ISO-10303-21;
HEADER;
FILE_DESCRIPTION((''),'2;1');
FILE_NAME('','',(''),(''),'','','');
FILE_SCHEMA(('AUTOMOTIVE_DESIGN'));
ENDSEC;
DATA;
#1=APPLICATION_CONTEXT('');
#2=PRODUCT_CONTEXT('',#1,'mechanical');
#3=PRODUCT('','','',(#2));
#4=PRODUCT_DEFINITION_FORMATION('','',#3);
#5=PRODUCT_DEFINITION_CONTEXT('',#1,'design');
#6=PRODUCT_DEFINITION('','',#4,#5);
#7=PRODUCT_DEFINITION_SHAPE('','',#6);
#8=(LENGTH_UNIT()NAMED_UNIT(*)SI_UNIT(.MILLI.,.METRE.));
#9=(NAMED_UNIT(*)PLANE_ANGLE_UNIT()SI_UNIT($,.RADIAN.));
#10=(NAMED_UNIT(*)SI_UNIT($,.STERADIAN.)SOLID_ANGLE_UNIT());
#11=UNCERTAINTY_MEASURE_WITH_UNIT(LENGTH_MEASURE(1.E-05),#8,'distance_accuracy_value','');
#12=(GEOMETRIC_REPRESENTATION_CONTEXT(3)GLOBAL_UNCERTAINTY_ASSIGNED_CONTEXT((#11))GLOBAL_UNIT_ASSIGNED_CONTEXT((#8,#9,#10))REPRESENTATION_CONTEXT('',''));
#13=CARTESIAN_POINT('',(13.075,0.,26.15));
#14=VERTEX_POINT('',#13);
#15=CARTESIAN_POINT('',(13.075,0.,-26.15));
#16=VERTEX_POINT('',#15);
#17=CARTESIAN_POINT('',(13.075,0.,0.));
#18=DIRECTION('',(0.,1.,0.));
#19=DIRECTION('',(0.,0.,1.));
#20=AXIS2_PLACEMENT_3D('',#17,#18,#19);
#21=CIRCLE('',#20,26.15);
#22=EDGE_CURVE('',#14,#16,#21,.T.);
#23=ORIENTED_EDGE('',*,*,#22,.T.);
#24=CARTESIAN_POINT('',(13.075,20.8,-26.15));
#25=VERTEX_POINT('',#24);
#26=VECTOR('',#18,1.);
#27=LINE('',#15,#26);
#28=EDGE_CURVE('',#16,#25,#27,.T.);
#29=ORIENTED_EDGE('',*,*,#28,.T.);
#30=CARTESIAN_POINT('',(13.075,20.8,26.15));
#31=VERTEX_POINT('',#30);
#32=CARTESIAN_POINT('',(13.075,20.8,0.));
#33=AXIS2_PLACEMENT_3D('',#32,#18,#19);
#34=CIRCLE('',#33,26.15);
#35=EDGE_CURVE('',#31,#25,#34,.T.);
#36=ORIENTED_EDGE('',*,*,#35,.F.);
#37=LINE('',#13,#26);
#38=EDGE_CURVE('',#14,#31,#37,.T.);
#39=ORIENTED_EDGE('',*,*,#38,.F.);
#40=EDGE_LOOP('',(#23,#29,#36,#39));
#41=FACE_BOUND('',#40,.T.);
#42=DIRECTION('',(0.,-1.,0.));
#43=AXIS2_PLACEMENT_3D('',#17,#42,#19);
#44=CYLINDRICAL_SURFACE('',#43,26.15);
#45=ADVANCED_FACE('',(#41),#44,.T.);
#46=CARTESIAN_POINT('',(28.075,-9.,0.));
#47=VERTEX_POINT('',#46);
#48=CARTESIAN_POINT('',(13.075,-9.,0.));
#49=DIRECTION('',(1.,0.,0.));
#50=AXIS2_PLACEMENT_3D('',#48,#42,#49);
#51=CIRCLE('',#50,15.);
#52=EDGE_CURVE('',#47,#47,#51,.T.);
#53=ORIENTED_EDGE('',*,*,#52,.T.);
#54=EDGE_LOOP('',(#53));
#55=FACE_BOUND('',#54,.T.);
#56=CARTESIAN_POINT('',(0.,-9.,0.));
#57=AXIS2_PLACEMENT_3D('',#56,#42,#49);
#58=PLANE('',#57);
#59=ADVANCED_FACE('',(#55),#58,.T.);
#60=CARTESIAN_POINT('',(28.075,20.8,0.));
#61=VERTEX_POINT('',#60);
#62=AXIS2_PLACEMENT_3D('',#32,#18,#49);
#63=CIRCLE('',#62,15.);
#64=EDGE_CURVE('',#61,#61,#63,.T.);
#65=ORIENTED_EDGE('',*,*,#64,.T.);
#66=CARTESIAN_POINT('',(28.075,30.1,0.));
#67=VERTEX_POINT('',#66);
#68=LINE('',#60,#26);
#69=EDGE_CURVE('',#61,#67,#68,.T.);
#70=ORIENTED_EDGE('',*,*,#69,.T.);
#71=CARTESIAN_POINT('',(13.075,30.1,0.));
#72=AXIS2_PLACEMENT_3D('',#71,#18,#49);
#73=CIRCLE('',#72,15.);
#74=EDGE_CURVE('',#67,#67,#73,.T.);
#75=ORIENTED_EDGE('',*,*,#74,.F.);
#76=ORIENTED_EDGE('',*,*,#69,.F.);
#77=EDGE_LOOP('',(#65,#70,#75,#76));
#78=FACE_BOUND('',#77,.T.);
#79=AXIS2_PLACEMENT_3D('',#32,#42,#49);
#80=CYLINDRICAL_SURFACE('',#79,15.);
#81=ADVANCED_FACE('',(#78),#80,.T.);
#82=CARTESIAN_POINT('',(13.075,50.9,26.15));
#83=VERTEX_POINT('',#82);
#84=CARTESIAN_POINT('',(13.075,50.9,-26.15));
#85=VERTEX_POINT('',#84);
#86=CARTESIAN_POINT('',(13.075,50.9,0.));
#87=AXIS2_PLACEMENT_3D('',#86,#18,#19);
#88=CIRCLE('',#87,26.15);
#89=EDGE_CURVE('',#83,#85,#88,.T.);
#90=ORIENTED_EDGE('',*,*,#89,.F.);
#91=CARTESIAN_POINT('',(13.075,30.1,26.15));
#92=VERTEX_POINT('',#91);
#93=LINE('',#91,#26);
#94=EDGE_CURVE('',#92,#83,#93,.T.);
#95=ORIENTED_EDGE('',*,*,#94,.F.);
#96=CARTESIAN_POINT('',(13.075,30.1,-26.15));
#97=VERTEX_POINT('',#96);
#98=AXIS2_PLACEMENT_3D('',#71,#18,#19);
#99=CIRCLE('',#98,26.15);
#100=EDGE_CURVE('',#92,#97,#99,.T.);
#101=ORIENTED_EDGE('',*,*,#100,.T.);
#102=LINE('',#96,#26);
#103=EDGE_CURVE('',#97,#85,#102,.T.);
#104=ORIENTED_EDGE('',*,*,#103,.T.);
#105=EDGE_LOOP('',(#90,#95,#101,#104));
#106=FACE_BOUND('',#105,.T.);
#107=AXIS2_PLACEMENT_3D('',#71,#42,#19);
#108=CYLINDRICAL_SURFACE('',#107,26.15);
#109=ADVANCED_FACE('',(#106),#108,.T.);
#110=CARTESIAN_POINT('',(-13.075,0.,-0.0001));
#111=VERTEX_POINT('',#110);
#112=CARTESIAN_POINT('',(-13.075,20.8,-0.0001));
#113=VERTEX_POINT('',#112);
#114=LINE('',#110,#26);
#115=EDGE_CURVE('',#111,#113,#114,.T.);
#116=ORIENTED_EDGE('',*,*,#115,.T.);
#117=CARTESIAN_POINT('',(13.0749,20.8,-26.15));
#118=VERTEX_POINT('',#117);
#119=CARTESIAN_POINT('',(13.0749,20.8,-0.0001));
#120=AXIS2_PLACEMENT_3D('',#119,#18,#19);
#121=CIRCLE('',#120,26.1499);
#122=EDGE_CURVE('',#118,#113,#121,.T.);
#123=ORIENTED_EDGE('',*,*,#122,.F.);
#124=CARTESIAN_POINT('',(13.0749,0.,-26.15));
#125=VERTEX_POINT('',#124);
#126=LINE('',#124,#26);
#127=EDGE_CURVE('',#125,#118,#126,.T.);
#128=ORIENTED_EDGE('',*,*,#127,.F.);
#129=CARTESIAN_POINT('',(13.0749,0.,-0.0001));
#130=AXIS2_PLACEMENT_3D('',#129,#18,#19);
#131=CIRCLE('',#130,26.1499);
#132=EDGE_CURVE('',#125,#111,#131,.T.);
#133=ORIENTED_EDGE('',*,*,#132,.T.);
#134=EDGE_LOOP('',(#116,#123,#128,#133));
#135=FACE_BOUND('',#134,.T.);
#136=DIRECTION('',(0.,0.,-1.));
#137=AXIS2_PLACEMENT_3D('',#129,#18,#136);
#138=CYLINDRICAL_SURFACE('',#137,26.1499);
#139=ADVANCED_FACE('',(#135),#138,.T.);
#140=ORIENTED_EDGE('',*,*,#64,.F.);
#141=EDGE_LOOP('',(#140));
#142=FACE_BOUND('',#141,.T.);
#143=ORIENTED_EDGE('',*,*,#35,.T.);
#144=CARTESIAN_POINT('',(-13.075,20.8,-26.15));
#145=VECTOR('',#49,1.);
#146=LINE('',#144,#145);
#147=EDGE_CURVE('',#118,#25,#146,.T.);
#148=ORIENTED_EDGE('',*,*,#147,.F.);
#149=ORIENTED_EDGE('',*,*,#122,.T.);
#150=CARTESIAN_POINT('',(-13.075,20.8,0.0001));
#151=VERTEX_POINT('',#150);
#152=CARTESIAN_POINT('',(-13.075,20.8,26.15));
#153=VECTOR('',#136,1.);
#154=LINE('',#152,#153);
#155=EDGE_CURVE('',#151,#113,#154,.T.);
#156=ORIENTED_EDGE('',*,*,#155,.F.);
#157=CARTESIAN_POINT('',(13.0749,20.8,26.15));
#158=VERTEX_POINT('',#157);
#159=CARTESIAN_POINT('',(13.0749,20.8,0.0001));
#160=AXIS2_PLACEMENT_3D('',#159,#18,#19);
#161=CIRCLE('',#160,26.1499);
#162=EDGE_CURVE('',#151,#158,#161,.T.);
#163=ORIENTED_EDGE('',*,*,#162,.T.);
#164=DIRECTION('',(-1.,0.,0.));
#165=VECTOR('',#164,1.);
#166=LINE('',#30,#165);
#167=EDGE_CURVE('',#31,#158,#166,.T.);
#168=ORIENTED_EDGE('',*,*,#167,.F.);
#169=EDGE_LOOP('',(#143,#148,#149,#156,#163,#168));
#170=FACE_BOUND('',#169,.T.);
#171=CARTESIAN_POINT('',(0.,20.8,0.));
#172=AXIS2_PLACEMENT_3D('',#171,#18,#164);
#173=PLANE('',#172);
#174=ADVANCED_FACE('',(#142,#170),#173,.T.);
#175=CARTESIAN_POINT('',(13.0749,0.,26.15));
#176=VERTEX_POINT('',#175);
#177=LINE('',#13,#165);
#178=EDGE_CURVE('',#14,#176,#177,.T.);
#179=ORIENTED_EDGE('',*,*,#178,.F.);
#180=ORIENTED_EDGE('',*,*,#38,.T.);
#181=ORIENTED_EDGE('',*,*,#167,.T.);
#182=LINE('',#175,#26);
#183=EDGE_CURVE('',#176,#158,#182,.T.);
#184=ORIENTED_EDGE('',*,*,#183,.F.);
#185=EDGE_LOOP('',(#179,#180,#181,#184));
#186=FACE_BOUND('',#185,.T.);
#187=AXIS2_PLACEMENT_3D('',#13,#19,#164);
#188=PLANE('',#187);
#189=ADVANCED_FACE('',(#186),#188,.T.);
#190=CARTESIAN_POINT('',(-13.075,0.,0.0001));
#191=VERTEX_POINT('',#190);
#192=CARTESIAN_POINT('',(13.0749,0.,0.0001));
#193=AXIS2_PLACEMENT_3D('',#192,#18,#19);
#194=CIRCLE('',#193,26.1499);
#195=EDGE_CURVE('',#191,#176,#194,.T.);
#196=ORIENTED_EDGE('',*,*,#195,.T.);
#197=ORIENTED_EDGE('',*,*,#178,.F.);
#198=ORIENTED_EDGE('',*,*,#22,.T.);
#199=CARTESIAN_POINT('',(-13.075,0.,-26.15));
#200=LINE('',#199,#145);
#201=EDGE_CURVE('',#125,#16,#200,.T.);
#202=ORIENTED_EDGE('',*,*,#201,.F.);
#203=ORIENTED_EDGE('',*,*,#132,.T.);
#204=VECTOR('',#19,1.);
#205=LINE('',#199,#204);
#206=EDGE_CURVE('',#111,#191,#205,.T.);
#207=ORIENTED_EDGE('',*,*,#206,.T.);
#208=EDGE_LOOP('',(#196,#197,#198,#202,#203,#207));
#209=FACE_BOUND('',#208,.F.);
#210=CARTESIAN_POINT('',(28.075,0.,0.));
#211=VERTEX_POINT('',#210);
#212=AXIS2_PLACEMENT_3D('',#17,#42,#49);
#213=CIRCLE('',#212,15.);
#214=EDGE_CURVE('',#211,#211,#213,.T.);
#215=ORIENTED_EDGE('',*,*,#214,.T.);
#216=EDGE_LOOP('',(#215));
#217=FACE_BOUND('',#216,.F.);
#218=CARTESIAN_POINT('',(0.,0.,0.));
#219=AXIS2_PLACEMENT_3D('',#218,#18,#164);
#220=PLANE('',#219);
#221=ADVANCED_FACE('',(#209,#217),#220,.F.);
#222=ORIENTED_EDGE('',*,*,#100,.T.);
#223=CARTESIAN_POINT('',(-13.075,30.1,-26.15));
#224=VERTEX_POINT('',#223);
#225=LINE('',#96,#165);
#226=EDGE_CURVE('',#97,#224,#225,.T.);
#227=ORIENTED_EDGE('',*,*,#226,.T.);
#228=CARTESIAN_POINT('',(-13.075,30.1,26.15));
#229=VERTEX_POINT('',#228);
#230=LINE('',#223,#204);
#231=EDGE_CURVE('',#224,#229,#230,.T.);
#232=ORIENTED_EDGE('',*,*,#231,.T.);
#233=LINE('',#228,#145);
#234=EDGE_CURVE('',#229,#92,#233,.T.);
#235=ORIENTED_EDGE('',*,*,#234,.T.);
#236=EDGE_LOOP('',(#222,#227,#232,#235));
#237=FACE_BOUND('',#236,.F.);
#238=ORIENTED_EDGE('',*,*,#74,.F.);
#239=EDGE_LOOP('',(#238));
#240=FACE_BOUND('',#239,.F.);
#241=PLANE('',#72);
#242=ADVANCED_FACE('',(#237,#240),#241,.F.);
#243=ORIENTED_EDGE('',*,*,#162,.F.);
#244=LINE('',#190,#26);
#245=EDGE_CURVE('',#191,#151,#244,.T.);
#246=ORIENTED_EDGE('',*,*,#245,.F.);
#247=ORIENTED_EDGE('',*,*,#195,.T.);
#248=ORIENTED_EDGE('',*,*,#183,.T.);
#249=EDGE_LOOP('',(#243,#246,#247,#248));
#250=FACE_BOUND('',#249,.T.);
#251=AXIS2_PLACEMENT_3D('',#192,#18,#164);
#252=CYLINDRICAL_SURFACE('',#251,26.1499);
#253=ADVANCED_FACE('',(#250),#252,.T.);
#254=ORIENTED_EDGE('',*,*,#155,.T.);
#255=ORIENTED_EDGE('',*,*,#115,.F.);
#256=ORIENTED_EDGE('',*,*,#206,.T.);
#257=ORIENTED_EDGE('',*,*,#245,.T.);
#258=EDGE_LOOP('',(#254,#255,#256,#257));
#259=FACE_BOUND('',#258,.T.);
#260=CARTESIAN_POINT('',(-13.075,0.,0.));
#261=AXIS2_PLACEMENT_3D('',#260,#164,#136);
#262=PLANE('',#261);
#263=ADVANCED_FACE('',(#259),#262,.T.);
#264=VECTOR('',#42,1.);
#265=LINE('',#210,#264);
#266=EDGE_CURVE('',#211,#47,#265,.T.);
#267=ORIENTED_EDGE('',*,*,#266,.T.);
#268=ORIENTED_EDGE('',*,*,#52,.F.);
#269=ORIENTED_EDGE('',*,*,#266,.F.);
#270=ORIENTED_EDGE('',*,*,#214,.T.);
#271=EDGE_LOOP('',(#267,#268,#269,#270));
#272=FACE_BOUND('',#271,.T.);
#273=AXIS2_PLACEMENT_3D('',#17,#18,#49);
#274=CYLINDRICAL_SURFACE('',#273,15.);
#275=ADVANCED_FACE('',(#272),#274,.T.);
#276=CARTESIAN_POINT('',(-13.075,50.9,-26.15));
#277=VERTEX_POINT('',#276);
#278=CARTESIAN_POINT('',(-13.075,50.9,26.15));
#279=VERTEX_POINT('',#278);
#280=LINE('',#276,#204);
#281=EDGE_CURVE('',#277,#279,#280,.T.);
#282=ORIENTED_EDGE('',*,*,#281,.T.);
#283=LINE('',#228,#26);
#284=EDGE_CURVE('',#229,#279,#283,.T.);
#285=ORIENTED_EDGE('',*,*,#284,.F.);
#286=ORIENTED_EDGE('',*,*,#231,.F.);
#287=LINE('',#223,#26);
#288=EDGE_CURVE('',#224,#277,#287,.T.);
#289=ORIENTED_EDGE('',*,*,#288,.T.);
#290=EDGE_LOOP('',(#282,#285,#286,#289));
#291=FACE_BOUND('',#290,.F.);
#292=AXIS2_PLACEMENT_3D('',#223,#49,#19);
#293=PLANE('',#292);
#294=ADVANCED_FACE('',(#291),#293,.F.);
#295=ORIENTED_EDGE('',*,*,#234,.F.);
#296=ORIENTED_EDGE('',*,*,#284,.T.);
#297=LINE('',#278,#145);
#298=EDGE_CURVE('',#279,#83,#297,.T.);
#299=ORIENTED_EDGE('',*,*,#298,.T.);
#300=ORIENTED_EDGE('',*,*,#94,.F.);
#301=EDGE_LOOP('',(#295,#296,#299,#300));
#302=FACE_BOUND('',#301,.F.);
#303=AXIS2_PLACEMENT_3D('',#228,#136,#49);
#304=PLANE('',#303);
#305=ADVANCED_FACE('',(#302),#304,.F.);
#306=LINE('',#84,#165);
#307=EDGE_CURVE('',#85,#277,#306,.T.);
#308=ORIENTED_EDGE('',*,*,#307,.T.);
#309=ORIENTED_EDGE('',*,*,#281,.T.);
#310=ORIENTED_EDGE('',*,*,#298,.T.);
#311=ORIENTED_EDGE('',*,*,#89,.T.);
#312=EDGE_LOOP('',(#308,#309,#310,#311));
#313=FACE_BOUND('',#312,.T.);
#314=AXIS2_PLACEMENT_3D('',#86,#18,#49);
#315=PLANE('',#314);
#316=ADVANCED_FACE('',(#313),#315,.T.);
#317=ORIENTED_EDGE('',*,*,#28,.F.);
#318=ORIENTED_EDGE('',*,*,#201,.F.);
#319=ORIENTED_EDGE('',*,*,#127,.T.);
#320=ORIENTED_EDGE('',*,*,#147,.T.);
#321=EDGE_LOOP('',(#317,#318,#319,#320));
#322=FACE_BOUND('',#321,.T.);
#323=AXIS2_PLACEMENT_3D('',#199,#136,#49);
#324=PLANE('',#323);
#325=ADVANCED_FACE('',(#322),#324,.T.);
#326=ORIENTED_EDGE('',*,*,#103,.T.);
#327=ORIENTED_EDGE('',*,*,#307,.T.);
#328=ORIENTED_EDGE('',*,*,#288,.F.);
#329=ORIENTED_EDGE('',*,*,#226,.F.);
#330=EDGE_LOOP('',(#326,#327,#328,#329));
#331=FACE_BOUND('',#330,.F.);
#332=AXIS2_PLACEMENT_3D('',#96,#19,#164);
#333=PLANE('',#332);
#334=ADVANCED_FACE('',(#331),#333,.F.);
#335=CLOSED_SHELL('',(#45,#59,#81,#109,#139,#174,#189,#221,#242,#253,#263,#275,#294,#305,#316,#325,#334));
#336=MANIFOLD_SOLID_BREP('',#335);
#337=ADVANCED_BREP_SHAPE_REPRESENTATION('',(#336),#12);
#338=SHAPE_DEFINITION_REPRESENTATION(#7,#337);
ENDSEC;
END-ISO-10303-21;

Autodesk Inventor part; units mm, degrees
ref_plane "XZ Plane" through (0, 0, 0) normal (0, 1, 0) x (-1, 0, 0)
ref_plane "XY Plane" through (0, 0, 0) normal (0, 0, 1) x (1, 0, 0)
sketch "Sketch1" plane through (0, 0, 0) normal (0, 1, 0) x (-1, 0, 0)
  line L0 (13.075, -26.15) -> (-13.075, -26.15)
  line L1 (-13.075, -26.15) -> (-13.075, 26.15)
  line L2 (-13.075, 26.15) -> (13.075, 26.15)
  line L3 (13.075, 26.15) -> (13.075, -26.15)
  arc A0 (-13.075, 26.15) -> (-13.075, -26.15) centre (-13.075, 0) ccw
  circle A1 centre (-13.075, 0) radius 26.15
  point P0 (0, 0)
  point P1 (0, -26.15)
  dimension "d0" = 26.15
extrude "Extrusion1" add sketch "Sketch1" along normal blind 20.8
sketch "Sketch2" plane through (0, 20.8, 0) normal (0, 1, 0) x (1, 0, 0)
  circle A0 centre (13.075, 0) radius 15
  arc A1 (13.075, -26.15) -> (13.075, 26.15) centre (13.075, 0) ccw projected
  point P0 (0, 0)
  dimension "d3" = 30
extrude "Extrusion2" add sketch "Sketch2" along normal blind 9.3
sketch "Sketch3" plane through (0, 0, 0) normal (0, -1, 0) x (1, 0, 0)
  circle A0 centre (13.075, 0) radius 15
  arc A1 (13.075, -26.15) -> (13.075, 26.15) centre (13.075, 0) ccw projected
  point P0 (0, 0)
  dimension "d6" = 30
extrude "Extrusion3" add sketch "Sketch3" along normal blind 9
sketch "Sketch4" plane through (13.075, 30.1, 0) normal (0, 1, 0) x (1, 0, 0)
  line L0 (-26.15, 26.15) -> (-26.15, -26.15) projected
  line L1 (-26.15, -26.15) -> (-26.15, 26.15)
  line L2 (0, 26.15) -> (-26.15, 26.15) projected
  line L3 (-26.15, 26.15) -> (0, 26.15)
  arc A0 (0, -26.15) -> (0, 26.15) centre (0, 0) ccw projected
  arc A1 (0, -26.15) -> (0, 26.15) centre (0, 0) ccw
  line L4 (-26.15, -26.15) -> (0, -26.15) projected
  line L5 (0, -26.15) -> (-26.15, -26.15)
  point P0 (-13.075, 0)
extrude "Extrusion4" add sketch "Sketch4" along normal blind 20.8
fillet "Fillet1" radius 26.15 2 edges at (-13.075, 10.4, -26.15) (-13.075, 10.4, 26.15)
properties part number "Table Hinge"
